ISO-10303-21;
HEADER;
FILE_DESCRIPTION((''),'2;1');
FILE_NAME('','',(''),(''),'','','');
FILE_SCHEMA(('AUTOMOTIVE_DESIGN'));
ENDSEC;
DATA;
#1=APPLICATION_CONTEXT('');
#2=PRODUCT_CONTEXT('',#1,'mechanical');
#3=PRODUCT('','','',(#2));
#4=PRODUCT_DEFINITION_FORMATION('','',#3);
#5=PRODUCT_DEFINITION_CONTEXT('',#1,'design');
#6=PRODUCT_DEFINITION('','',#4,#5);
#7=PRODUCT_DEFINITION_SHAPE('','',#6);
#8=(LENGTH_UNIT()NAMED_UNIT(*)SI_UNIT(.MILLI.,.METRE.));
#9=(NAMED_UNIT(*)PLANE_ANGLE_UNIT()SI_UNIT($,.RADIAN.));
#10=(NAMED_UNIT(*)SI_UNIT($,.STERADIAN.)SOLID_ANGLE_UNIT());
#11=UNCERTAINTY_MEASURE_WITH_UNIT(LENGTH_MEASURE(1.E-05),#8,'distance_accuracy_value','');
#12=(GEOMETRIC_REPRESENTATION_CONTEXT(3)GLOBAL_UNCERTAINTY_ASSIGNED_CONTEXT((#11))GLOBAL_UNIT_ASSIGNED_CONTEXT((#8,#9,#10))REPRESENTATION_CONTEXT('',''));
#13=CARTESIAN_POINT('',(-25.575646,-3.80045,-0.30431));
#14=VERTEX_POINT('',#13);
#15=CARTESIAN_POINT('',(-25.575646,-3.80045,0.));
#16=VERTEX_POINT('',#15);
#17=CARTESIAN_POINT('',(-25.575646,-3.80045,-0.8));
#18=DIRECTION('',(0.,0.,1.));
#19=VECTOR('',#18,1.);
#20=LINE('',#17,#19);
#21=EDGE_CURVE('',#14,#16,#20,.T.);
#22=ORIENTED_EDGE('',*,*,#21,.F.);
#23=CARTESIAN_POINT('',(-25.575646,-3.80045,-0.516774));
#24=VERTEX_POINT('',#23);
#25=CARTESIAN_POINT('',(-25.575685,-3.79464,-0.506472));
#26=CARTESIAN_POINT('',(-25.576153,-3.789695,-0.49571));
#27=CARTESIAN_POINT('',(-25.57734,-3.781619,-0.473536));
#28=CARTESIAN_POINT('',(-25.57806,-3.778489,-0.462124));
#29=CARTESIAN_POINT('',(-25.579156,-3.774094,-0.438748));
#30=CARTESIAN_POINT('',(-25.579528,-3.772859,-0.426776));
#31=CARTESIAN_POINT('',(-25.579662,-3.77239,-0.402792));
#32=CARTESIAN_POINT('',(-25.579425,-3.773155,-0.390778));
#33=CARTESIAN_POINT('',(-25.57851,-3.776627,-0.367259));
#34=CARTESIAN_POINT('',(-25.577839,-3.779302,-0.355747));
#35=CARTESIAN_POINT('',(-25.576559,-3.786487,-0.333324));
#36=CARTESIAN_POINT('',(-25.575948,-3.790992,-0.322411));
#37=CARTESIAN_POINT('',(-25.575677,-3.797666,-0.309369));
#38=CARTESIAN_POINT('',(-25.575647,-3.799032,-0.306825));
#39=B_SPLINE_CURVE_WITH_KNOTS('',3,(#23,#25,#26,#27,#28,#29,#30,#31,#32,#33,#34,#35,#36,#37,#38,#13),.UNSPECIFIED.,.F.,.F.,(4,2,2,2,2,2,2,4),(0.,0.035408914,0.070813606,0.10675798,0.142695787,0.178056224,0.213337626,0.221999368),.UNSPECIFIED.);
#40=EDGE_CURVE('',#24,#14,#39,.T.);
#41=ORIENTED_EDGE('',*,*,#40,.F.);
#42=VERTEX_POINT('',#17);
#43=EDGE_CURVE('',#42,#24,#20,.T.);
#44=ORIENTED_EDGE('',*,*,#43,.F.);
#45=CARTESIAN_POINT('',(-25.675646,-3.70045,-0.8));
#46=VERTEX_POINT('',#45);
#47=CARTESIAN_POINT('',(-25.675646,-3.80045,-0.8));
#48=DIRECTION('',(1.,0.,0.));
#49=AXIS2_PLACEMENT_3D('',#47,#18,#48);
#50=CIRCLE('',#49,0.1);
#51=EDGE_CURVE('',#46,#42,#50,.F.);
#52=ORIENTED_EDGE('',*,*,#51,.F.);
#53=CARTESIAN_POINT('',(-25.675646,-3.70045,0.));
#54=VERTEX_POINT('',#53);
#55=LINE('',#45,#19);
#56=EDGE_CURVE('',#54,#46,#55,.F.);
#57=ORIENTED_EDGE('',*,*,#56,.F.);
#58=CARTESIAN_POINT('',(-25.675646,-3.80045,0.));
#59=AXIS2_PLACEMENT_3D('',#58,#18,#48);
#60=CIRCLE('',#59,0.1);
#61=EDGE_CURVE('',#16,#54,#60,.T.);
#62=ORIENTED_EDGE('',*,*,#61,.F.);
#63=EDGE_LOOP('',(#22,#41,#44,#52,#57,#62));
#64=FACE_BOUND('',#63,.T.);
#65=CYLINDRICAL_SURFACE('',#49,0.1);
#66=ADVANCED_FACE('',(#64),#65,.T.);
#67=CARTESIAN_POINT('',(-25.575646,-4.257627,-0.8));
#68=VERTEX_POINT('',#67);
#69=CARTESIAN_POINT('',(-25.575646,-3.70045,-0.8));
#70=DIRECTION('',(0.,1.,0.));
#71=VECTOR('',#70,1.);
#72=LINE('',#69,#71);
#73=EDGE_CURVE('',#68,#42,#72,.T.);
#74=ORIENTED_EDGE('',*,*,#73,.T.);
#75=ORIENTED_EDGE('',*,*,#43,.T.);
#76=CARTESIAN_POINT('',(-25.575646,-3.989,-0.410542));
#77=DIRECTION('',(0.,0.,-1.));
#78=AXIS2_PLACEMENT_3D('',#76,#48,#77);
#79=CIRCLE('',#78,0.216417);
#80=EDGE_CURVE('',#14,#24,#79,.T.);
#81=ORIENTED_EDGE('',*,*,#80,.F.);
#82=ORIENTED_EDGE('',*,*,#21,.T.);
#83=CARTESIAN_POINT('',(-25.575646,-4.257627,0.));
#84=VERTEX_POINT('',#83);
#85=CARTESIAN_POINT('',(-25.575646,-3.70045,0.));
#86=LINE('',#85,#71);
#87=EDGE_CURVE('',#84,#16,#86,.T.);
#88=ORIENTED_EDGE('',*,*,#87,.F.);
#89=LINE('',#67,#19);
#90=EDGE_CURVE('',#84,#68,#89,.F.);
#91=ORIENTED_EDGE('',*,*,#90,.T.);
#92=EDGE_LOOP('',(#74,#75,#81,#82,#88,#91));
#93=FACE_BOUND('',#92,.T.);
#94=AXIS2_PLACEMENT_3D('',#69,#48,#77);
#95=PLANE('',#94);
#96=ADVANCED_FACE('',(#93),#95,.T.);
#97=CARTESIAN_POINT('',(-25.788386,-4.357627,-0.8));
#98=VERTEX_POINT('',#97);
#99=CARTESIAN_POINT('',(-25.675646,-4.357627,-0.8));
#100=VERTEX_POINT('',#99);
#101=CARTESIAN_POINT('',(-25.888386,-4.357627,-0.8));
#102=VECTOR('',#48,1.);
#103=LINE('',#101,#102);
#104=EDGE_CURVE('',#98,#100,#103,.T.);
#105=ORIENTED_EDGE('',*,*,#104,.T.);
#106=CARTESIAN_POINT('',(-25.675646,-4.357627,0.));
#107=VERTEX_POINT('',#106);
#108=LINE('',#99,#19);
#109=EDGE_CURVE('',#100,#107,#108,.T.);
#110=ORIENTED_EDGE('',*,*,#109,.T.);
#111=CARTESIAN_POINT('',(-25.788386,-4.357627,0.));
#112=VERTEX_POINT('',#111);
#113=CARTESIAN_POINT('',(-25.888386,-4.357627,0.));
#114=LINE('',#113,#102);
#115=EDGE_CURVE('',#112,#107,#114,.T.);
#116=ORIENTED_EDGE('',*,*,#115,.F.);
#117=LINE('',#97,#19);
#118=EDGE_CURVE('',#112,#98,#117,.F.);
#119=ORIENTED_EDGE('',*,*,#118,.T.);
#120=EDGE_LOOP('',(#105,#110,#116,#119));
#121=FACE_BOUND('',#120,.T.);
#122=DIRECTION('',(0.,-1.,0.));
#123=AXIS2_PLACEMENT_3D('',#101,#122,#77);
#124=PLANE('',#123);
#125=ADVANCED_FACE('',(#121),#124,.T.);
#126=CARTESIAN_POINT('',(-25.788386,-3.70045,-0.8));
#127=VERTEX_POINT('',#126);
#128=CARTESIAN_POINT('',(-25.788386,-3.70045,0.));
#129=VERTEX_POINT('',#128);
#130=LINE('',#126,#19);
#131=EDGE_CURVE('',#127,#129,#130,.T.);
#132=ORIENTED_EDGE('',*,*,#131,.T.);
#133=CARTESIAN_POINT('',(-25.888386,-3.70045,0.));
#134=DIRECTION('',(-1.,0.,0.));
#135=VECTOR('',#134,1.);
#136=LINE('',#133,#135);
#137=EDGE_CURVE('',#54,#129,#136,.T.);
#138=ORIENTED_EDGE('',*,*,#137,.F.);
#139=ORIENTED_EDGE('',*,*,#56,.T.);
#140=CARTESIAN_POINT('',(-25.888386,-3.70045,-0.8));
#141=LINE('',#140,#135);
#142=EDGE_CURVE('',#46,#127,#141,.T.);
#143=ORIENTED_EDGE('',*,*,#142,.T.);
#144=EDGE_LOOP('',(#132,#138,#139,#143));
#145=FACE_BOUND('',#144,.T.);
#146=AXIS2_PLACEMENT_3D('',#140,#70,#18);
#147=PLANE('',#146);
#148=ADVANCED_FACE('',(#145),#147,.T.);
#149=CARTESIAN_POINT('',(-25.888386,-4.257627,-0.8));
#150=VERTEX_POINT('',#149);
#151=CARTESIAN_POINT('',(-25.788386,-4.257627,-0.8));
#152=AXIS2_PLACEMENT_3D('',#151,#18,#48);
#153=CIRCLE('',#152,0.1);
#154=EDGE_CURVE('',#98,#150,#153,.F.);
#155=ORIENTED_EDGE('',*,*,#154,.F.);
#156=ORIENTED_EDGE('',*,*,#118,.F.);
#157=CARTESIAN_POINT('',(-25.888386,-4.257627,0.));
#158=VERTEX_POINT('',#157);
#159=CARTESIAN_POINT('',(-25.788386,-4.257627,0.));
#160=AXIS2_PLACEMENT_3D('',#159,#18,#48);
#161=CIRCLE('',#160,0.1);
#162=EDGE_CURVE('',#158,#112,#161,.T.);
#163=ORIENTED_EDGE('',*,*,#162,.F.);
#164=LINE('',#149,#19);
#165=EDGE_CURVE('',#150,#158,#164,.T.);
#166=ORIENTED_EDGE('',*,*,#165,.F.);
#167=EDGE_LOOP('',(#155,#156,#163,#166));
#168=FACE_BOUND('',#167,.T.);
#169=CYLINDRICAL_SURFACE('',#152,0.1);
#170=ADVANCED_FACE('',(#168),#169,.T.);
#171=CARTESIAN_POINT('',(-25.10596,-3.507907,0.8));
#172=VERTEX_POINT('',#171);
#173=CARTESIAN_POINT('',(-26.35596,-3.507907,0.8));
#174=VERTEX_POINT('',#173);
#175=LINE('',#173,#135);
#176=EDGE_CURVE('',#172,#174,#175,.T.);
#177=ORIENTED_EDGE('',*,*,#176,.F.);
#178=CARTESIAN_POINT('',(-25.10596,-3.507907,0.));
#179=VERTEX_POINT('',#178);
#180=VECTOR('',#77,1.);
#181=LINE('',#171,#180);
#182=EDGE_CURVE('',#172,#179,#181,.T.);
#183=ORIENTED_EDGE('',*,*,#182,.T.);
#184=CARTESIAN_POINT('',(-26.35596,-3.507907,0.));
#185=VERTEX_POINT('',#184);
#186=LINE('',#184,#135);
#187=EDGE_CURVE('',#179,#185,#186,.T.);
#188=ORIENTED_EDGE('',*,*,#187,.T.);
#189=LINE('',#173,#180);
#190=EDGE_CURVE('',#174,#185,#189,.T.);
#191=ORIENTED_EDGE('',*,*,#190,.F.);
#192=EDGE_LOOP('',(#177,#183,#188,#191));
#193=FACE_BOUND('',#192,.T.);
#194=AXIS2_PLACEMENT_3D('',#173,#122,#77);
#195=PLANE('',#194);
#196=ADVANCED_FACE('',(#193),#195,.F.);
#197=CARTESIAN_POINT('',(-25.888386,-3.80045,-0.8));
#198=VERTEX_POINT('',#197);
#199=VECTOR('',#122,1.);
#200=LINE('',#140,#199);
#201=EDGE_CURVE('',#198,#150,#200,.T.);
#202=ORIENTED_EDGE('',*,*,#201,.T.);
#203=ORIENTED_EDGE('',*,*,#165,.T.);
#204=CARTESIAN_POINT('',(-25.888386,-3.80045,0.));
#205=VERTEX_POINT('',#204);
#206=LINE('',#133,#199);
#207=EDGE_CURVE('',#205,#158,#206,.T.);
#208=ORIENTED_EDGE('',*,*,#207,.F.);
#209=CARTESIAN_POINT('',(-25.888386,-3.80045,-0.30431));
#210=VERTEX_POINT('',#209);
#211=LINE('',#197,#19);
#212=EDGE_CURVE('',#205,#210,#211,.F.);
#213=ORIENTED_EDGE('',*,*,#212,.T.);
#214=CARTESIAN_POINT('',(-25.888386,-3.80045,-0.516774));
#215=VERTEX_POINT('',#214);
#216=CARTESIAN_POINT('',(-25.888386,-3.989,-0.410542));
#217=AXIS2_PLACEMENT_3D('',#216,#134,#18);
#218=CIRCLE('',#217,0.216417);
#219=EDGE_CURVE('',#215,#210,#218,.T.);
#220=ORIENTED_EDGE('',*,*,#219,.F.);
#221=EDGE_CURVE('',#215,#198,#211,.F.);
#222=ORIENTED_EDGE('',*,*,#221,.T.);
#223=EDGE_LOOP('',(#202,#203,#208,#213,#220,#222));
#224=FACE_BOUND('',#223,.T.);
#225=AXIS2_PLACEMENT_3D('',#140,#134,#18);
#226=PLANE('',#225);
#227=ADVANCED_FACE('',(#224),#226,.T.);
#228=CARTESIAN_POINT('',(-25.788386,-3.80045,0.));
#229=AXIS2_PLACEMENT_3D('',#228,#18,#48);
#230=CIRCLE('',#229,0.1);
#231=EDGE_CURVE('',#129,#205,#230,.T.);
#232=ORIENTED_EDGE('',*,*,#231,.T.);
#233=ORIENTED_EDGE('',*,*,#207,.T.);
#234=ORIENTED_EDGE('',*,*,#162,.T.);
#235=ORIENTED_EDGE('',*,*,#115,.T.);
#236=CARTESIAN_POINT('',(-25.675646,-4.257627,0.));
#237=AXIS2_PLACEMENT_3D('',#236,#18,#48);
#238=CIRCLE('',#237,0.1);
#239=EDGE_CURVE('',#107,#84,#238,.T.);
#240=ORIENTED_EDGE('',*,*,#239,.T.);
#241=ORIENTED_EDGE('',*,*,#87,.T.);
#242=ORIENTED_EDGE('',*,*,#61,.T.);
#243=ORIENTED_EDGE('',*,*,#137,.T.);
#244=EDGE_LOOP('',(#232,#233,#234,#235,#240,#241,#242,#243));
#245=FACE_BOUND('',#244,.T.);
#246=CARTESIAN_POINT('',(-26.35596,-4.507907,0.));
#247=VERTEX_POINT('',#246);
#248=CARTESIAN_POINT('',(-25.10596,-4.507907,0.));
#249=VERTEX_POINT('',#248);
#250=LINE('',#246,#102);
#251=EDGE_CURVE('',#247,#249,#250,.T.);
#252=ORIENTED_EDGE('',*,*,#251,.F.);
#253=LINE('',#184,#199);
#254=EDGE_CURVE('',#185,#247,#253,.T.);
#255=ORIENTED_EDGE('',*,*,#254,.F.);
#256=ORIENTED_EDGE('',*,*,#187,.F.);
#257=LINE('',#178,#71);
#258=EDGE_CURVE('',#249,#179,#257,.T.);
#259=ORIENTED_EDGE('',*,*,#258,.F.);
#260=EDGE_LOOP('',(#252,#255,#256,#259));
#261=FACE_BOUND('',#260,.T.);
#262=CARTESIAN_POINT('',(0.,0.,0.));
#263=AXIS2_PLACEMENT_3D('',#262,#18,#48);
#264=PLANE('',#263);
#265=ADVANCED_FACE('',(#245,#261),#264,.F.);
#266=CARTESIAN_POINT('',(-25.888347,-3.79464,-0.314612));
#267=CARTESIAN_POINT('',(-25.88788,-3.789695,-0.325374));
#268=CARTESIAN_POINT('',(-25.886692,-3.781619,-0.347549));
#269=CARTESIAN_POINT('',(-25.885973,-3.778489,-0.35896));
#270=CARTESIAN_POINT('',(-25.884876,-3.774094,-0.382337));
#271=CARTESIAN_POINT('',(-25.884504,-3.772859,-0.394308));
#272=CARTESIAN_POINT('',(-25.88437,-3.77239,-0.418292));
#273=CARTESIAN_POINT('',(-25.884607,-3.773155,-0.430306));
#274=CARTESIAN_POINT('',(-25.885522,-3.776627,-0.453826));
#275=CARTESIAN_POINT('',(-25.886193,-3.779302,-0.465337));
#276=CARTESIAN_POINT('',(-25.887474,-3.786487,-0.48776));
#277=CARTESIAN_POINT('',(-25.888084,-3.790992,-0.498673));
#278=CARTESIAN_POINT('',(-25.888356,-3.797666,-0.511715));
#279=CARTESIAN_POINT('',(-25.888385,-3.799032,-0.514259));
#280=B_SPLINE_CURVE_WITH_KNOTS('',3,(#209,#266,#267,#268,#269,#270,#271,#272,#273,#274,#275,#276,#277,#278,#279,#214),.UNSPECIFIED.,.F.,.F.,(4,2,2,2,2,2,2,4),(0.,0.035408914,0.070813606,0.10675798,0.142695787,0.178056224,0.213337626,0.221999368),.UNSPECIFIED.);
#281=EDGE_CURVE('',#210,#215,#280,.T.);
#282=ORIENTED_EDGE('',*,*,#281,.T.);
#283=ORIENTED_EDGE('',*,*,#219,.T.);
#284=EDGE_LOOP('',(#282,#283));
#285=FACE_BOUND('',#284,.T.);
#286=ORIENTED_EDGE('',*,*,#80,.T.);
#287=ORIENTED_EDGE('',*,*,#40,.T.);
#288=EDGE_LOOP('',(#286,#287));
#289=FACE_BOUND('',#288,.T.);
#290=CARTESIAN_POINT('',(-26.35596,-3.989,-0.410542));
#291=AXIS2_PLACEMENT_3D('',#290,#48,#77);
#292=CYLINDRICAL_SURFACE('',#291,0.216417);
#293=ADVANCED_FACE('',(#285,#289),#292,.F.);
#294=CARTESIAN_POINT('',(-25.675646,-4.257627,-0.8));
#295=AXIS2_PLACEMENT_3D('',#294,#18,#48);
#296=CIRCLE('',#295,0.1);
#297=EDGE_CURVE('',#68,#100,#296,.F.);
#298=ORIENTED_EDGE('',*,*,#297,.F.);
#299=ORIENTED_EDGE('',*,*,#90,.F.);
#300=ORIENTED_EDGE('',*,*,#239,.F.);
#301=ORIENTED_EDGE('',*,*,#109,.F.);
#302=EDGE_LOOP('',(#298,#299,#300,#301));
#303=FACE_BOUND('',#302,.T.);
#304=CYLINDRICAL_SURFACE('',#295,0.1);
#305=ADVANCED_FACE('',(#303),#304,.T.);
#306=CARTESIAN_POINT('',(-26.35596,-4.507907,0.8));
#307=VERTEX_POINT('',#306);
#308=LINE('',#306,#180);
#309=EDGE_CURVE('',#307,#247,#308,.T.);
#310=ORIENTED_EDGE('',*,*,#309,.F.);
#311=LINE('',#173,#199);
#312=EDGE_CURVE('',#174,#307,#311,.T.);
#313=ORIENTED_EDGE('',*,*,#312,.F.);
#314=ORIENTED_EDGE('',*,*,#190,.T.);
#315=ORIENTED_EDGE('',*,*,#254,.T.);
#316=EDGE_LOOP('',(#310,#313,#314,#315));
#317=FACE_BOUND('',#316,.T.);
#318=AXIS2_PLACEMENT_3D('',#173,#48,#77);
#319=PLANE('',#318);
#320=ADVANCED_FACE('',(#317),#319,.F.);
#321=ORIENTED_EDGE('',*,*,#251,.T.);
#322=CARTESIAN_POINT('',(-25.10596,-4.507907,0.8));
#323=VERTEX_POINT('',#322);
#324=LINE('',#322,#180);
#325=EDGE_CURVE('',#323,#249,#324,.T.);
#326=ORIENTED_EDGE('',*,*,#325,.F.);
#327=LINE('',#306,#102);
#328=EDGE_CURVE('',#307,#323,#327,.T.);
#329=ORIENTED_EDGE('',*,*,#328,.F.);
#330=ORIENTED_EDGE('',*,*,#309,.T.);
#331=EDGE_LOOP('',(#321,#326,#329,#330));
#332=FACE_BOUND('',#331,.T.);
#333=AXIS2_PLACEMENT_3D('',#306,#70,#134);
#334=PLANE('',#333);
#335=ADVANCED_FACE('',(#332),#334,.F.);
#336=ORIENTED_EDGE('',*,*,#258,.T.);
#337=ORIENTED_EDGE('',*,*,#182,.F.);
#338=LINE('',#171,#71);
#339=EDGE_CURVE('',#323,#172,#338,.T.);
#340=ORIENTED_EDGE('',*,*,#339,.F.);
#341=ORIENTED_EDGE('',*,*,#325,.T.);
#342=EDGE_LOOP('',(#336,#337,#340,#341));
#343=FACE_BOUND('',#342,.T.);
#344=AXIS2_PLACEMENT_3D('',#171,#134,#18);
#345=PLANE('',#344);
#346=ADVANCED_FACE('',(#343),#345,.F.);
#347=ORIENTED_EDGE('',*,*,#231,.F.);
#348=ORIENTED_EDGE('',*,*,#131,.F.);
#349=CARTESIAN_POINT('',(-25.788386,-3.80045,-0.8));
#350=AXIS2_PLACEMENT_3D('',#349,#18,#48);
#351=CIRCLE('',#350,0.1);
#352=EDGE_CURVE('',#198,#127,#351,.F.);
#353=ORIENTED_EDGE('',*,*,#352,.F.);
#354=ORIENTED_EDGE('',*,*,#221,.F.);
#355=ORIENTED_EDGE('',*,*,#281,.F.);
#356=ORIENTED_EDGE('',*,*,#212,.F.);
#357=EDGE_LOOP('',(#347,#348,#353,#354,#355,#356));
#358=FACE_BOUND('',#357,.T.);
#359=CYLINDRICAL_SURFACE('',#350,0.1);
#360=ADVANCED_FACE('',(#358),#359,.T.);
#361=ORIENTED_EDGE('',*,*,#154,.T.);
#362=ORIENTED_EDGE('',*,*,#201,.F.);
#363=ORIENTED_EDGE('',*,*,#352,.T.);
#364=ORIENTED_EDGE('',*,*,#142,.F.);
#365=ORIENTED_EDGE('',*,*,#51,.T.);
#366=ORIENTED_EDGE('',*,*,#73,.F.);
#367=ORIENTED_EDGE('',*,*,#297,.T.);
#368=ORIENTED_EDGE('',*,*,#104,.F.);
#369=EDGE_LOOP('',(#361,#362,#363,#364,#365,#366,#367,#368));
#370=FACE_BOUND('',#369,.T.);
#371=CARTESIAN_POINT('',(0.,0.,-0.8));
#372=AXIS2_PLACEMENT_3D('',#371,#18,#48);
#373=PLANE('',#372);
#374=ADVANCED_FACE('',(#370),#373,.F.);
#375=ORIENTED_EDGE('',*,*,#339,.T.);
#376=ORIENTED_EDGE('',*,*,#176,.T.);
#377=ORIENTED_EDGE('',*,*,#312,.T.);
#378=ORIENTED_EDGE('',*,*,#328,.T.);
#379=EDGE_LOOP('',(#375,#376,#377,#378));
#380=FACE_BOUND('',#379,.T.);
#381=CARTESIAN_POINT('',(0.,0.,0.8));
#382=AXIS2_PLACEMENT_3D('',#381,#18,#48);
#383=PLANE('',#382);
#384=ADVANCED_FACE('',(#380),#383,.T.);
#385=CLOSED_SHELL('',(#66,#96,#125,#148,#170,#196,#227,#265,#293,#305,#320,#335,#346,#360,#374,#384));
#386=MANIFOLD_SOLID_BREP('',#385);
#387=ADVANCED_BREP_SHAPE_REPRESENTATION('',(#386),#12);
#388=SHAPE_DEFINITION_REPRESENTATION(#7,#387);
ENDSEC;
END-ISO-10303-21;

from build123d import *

# Parameters (mm, degrees)
SKETCH1_W               = 1.25
SKETCH1_H               = 1
BOSS_EXTRUDE1_DEPTH     = 0.8
SKETCH2_W               = 0.312740208
SKETCH2_H               = 0.657177059
BOSS_EXTRUDE3_DEPTH     = 0.8
CUT_EXTRUDE1_DEPTH      = 5.644364033
CUT_EXTRUDE1_DEPTH_BACK = 5.644364033
SKETCH3_R               = 0.216417025
FILLET1_R               = 0.1
FILLET2_R               = 0.1
FILLET3_R               = 0.1


with BuildPart() as part:
    # Sketch1 → Boss-Extrude1 (new body)
    with BuildSketch(Plane.XY):
        with Locations((-25.730959564, -4.007907279)):
            Rectangle(SKETCH1_W, SKETCH1_H)
    extrude(amount=BOSS_EXTRUDE1_DEPTH)

    # Sketch2 → Boss-Extrude3 (add)
    with BuildSketch(Plane.XY):
        with Locations((-25.732016119, -4.029038374)):
            Rectangle(SKETCH2_W, SKETCH2_H)
    extrude(amount=-BOSS_EXTRUDE3_DEPTH)

    # Sketch3 → Cut-Extrude1 (cut, two sides: drawn at the far end of the back side and taken through both)
    with BuildSketch(Plane(origin=(-25.575646015, 0, 0), x_dir=(0, 0, -1), z_dir=(1, 0, 0)).offset(-CUT_EXTRUDE1_DEPTH_BACK)):
        with Locations((0.410542062, -3.988999955)):
            Circle(SKETCH3_R)
    extrude(amount=CUT_EXTRUDE1_DEPTH + CUT_EXTRUDE1_DEPTH_BACK, mode=Mode.SUBTRACT)

    # Fillet1
    # the kernel refuses this fillet: 0.1 mm, written as the material it takes off along each edge
    with BuildSketch(Plane(origin=(-25.575646015, -3.700449845, 0), x_dir=(-1, 0, 0), z_dir=(0, 0, -1))) as fillet1_piece_1:
        with BuildLine():
            CenterArc((FILLET1_R, -FILLET1_R), FILLET1_R, 90, 90)
            Line((0, -FILLET1_R), (0, 0))
            Line((0, 0), (FILLET1_R, 0))
        make_face()
    extrude(amount=1.05, mode=Mode.SUBTRACT)

    # Fillet2
    # the kernel refuses this fillet: 0.1 mm, written as the material it takes off along each edge
    with BuildSketch(Plane(origin=(-25.888386223, -3.700449845, 0), x_dir=(1, 0, 0), z_dir=(0, 0, -1))) as fillet2_piece_1:
        with BuildLine():
            CenterArc((FILLET2_R, FILLET2_R), FILLET2_R, 180, 90)
            Line((0, FILLET2_R), (0, 0))
            Line((0, 0), (FILLET2_R, 0))
        make_face()
    extrude(amount=1.05, mode=Mode.SUBTRACT)
    with BuildSketch(Plane(origin=(-25.575646015, -4.357626904, 0), x_dir=(0, 1, 0), z_dir=(0, 0, -1))) as fillet2_piece_2:
        with BuildLine():
            CenterArc((FILLET2_R, -FILLET2_R), FILLET2_R, 90, 90)
            Line((0, -FILLET2_R), (0, 0))
            Line((0, 0), (FILLET2_R, 0))
        make_face()
    extrude(amount=1.05, mode=Mode.SUBTRACT)

    # Fillet3
    fillet3_edges = [part.edges().sort_by_distance(p)[0] for p in [
        (-25.888386223, -4.357626904, -0.4),
    ]]
    fillet(fillet3_edges, radius=FILLET3_R)


solid = part.part
